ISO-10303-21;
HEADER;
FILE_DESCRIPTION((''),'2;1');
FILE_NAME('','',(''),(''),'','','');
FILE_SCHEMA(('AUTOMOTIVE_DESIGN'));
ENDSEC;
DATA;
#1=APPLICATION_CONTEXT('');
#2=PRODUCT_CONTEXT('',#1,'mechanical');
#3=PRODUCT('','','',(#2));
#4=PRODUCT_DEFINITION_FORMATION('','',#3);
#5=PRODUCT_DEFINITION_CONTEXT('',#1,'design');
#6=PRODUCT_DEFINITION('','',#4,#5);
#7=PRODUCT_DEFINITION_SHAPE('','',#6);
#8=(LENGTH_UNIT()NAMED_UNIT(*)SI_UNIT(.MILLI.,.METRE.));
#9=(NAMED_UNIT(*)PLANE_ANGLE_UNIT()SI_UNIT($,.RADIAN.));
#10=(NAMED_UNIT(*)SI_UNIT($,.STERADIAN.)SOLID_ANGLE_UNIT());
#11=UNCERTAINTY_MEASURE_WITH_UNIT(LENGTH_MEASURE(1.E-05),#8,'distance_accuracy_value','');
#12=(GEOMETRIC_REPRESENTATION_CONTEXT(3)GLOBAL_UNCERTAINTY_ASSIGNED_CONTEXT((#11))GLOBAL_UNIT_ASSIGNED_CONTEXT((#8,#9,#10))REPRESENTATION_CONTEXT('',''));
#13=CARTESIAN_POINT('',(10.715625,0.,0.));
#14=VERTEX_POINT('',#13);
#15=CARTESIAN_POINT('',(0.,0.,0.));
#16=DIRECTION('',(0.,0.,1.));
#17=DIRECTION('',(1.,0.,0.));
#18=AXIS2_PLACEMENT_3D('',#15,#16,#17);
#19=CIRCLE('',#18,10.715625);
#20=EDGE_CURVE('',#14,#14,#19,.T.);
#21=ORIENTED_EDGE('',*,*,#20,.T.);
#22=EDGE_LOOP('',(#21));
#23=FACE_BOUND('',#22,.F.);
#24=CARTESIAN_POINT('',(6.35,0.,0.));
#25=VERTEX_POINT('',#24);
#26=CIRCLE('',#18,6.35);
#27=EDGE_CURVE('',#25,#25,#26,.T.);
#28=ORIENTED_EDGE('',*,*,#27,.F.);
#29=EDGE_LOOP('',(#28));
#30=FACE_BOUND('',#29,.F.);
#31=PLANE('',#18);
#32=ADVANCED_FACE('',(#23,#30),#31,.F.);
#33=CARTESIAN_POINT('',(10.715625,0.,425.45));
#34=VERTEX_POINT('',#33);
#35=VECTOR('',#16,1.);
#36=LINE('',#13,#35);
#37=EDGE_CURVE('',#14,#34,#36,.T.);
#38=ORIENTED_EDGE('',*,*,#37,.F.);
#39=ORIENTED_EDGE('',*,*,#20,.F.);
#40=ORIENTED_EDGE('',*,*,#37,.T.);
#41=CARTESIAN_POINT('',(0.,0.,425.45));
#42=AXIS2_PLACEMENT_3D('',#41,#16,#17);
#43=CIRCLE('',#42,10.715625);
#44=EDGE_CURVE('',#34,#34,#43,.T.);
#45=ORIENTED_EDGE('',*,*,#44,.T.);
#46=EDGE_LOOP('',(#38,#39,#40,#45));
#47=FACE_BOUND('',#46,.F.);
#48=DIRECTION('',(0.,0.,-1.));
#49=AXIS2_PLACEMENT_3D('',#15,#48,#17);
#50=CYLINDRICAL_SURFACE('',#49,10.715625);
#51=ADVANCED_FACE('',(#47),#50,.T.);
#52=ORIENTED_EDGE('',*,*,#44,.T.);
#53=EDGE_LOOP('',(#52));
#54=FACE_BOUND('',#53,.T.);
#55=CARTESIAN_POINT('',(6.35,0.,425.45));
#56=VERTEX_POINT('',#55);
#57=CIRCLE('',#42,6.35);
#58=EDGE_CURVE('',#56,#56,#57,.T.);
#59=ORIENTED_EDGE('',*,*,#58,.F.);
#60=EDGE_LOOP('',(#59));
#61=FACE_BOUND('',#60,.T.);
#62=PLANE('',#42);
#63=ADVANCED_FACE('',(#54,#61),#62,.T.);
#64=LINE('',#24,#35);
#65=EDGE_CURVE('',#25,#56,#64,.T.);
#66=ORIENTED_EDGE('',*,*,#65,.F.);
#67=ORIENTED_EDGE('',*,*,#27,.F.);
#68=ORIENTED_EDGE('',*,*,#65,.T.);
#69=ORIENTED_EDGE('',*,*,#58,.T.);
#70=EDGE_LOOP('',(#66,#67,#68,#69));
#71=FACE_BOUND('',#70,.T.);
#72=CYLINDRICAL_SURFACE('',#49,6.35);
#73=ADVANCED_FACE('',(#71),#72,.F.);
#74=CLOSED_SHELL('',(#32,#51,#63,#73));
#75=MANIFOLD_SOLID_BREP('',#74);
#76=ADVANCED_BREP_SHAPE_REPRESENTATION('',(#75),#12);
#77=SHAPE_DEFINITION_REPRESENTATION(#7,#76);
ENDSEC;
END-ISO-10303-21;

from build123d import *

# Parameters (mm, degrees)
F1_R     = 10.715625
F1_R_2   = 6.35
F2_DEPTH = 425.45


# Not quite as in the source:
# - a variable given as a bare number and used for a length is read in inches; the dataset says mm whatever the document's units were


with BuildPart() as f2:
    # F1 (on Top) → F2 (new body)
    with BuildSketch(Plane.XY):
        Circle(F1_R)
        Circle(F1_R_2, mode=Mode.SUBTRACT)
    extrude(amount=F2_DEPTH)


solid = f2.part
